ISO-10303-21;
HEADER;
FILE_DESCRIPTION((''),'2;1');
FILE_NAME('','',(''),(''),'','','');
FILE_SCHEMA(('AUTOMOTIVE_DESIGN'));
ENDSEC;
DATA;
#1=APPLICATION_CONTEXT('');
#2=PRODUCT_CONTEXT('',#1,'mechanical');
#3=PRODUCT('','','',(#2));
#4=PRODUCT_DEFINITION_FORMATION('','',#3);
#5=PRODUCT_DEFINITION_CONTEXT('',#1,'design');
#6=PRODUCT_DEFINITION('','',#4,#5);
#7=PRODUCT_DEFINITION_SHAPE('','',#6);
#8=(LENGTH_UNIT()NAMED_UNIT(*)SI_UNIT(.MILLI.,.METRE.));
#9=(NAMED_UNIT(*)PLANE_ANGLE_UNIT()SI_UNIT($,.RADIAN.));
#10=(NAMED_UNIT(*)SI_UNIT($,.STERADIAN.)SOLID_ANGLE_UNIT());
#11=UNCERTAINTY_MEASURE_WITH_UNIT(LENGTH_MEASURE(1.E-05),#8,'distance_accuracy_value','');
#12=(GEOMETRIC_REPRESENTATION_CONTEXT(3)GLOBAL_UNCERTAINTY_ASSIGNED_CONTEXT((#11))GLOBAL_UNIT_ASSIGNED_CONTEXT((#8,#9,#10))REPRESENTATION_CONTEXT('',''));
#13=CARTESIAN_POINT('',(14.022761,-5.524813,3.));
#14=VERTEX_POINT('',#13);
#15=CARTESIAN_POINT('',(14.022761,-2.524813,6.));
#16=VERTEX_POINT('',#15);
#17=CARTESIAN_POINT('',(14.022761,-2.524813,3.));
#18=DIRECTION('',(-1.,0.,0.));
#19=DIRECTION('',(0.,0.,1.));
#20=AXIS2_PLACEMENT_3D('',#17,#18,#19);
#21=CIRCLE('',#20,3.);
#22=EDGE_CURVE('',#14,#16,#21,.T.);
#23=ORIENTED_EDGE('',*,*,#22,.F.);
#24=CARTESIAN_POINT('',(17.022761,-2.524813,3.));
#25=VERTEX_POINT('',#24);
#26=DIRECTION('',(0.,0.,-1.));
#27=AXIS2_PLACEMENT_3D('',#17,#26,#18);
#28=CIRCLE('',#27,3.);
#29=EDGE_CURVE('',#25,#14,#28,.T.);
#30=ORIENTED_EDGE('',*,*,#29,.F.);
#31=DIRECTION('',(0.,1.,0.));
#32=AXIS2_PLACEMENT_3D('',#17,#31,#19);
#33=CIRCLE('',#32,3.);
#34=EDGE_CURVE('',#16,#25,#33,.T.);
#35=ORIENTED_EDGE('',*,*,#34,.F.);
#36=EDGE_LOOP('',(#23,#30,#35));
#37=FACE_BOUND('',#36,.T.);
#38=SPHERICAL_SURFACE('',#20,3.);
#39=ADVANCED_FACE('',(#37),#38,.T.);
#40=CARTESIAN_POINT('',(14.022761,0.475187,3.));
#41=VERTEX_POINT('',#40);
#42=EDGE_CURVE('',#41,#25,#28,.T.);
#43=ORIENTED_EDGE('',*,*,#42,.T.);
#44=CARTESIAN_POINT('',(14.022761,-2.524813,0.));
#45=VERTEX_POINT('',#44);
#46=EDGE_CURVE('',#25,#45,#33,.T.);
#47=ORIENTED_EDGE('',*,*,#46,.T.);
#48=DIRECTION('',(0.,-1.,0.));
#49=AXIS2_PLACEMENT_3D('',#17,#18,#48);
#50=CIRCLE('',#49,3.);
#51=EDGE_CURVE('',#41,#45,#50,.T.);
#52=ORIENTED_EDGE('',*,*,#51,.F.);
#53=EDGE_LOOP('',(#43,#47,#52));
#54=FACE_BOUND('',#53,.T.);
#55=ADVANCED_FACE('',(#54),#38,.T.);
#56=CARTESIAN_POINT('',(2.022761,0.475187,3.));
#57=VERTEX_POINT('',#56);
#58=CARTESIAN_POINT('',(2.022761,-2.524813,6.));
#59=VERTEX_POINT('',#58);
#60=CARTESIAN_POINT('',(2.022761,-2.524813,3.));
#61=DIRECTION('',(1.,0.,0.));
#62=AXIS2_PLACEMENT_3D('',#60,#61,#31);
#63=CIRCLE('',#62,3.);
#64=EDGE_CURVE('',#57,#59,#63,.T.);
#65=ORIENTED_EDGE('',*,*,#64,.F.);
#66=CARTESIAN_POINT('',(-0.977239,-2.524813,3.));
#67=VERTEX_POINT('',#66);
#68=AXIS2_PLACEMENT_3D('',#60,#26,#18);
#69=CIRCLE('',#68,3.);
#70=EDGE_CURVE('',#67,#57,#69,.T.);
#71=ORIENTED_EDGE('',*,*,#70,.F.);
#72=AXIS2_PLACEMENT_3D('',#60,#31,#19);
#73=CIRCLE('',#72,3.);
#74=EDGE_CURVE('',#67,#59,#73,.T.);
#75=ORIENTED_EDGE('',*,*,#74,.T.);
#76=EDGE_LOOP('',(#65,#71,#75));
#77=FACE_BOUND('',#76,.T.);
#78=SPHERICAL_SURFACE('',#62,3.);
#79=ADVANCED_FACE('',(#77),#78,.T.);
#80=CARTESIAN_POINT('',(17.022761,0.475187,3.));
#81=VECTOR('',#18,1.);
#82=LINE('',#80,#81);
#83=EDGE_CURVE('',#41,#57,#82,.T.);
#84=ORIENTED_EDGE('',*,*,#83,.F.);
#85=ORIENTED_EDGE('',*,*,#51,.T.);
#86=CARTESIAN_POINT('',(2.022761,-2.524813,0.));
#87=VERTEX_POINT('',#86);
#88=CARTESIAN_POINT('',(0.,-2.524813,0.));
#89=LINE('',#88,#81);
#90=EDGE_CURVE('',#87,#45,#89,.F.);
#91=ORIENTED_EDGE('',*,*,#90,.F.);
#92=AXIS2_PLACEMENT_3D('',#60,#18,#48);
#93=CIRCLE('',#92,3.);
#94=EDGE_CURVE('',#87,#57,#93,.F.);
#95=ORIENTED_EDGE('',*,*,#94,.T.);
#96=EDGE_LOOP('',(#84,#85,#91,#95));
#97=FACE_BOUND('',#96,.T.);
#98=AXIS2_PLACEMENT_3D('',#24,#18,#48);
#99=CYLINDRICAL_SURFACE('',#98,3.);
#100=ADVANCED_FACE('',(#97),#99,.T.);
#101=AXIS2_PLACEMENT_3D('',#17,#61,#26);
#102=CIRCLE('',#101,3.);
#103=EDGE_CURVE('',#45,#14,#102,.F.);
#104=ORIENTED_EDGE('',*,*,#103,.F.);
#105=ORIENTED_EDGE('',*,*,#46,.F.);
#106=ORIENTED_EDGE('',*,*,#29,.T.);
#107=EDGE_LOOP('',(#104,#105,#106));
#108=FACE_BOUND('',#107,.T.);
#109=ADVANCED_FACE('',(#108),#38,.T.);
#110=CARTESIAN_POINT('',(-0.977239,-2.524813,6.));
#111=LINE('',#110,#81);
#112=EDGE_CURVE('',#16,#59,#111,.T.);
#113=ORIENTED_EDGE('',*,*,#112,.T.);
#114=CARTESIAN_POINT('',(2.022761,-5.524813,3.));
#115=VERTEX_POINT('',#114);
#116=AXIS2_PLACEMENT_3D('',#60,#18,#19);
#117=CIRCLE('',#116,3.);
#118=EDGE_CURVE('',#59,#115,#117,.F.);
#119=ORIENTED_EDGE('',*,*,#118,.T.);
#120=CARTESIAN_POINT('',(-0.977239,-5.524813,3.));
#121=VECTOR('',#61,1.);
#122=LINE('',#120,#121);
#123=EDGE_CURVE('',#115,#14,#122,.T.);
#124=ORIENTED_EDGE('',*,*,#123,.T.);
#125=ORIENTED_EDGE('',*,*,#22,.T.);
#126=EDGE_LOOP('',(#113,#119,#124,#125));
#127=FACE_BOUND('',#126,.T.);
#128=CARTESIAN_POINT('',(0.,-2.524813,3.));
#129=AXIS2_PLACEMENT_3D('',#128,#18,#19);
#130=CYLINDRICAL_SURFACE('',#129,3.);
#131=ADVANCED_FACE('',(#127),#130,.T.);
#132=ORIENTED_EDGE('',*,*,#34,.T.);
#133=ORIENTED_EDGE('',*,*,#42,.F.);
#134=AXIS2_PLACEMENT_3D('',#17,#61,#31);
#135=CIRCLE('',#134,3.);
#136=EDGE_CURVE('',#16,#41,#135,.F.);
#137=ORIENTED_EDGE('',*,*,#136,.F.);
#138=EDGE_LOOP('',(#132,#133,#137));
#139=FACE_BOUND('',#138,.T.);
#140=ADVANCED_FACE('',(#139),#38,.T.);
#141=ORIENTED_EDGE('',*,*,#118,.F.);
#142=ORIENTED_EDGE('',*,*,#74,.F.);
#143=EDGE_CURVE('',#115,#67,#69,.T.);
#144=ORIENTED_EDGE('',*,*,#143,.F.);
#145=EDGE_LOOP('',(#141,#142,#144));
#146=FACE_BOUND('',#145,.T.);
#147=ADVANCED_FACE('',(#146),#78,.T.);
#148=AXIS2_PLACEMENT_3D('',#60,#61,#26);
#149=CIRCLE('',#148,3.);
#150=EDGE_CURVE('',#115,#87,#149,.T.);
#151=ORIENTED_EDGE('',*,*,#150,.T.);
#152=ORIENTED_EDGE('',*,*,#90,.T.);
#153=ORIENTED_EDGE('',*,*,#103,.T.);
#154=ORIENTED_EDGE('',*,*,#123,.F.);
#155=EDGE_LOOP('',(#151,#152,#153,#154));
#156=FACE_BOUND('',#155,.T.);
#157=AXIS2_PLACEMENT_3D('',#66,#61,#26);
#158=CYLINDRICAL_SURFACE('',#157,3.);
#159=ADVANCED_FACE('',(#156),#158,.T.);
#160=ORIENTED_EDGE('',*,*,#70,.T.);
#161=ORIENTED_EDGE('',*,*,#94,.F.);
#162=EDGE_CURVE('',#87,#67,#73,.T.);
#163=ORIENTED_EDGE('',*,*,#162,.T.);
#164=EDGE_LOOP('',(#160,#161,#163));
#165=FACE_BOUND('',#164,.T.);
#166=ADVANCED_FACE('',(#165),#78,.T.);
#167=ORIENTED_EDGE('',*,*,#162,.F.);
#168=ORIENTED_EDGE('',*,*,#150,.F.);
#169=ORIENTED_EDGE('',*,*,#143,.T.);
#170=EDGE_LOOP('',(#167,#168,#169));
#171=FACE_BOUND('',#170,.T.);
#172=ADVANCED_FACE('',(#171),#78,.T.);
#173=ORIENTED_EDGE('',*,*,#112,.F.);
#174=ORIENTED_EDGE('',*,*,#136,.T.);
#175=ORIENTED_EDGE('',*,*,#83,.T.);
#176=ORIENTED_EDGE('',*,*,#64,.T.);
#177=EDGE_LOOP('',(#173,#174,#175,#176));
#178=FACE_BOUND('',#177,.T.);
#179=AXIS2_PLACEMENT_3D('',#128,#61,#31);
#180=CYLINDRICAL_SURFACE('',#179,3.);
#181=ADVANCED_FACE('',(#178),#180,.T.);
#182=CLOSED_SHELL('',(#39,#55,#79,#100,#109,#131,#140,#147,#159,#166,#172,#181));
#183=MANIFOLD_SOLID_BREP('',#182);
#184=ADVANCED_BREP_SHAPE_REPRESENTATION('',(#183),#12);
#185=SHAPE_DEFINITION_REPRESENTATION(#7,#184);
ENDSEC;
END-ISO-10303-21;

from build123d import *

# Parameters (mm, degrees)
SKETCH1_W           = 18
SKETCH1_H           = 6
BOSS_EXTRUDE1_DEPTH = 6
FILLET1_R           = 3
FILLET2_R           = 3


with BuildPart() as part:
    # Sketch1 → Boss-Extrude1 (new body)
    with BuildSketch(Plane.XY):
        with Locations((8.022761194, -2.524813433)):
            Rectangle(SKETCH1_W, SKETCH1_H)
    extrude(amount=BOSS_EXTRUDE1_DEPTH)

    # Fillet1
    fillet1_edges = [part.edges().sort_by_distance(p)[0] for p in [
        (8.022761194, -5.524813433, 6),
        (8.022761194, -5.524813433, 0),
        (8.022761194, 0.475186567, 0),
        (8.022761194, 0.475186567, 6),
    ]]
    fillet(fillet1_edges, radius=FILLET1_R - 0.0001)  # a hair under: the kernel refuses the full size

    # Fillet2
    fillet2_edges = [part.edges().sort_by_distance(p)[0] for p in [
        (17.022761194, -0.4034638, 5.121349633),
        (17.022761194, -0.4034638, 0.878650367),
        (17.022761194, -4.646163066, 0.878650367),
        (17.022761194, -4.646163066, 5.121349633),
        (-0.977238806, -0.4034638, 5.121349633),
        (-0.977238806, -0.4034638, 0.878650367),
        (-0.977238806, -4.646163066, 0.878650367),
        (-0.977238806, -4.646163066, 5.121349633),
    ]]
    fillet(fillet2_edges, radius=FILLET2_R - 0.0001)  # a hair under: the kernel refuses the full size


solid = part.part
